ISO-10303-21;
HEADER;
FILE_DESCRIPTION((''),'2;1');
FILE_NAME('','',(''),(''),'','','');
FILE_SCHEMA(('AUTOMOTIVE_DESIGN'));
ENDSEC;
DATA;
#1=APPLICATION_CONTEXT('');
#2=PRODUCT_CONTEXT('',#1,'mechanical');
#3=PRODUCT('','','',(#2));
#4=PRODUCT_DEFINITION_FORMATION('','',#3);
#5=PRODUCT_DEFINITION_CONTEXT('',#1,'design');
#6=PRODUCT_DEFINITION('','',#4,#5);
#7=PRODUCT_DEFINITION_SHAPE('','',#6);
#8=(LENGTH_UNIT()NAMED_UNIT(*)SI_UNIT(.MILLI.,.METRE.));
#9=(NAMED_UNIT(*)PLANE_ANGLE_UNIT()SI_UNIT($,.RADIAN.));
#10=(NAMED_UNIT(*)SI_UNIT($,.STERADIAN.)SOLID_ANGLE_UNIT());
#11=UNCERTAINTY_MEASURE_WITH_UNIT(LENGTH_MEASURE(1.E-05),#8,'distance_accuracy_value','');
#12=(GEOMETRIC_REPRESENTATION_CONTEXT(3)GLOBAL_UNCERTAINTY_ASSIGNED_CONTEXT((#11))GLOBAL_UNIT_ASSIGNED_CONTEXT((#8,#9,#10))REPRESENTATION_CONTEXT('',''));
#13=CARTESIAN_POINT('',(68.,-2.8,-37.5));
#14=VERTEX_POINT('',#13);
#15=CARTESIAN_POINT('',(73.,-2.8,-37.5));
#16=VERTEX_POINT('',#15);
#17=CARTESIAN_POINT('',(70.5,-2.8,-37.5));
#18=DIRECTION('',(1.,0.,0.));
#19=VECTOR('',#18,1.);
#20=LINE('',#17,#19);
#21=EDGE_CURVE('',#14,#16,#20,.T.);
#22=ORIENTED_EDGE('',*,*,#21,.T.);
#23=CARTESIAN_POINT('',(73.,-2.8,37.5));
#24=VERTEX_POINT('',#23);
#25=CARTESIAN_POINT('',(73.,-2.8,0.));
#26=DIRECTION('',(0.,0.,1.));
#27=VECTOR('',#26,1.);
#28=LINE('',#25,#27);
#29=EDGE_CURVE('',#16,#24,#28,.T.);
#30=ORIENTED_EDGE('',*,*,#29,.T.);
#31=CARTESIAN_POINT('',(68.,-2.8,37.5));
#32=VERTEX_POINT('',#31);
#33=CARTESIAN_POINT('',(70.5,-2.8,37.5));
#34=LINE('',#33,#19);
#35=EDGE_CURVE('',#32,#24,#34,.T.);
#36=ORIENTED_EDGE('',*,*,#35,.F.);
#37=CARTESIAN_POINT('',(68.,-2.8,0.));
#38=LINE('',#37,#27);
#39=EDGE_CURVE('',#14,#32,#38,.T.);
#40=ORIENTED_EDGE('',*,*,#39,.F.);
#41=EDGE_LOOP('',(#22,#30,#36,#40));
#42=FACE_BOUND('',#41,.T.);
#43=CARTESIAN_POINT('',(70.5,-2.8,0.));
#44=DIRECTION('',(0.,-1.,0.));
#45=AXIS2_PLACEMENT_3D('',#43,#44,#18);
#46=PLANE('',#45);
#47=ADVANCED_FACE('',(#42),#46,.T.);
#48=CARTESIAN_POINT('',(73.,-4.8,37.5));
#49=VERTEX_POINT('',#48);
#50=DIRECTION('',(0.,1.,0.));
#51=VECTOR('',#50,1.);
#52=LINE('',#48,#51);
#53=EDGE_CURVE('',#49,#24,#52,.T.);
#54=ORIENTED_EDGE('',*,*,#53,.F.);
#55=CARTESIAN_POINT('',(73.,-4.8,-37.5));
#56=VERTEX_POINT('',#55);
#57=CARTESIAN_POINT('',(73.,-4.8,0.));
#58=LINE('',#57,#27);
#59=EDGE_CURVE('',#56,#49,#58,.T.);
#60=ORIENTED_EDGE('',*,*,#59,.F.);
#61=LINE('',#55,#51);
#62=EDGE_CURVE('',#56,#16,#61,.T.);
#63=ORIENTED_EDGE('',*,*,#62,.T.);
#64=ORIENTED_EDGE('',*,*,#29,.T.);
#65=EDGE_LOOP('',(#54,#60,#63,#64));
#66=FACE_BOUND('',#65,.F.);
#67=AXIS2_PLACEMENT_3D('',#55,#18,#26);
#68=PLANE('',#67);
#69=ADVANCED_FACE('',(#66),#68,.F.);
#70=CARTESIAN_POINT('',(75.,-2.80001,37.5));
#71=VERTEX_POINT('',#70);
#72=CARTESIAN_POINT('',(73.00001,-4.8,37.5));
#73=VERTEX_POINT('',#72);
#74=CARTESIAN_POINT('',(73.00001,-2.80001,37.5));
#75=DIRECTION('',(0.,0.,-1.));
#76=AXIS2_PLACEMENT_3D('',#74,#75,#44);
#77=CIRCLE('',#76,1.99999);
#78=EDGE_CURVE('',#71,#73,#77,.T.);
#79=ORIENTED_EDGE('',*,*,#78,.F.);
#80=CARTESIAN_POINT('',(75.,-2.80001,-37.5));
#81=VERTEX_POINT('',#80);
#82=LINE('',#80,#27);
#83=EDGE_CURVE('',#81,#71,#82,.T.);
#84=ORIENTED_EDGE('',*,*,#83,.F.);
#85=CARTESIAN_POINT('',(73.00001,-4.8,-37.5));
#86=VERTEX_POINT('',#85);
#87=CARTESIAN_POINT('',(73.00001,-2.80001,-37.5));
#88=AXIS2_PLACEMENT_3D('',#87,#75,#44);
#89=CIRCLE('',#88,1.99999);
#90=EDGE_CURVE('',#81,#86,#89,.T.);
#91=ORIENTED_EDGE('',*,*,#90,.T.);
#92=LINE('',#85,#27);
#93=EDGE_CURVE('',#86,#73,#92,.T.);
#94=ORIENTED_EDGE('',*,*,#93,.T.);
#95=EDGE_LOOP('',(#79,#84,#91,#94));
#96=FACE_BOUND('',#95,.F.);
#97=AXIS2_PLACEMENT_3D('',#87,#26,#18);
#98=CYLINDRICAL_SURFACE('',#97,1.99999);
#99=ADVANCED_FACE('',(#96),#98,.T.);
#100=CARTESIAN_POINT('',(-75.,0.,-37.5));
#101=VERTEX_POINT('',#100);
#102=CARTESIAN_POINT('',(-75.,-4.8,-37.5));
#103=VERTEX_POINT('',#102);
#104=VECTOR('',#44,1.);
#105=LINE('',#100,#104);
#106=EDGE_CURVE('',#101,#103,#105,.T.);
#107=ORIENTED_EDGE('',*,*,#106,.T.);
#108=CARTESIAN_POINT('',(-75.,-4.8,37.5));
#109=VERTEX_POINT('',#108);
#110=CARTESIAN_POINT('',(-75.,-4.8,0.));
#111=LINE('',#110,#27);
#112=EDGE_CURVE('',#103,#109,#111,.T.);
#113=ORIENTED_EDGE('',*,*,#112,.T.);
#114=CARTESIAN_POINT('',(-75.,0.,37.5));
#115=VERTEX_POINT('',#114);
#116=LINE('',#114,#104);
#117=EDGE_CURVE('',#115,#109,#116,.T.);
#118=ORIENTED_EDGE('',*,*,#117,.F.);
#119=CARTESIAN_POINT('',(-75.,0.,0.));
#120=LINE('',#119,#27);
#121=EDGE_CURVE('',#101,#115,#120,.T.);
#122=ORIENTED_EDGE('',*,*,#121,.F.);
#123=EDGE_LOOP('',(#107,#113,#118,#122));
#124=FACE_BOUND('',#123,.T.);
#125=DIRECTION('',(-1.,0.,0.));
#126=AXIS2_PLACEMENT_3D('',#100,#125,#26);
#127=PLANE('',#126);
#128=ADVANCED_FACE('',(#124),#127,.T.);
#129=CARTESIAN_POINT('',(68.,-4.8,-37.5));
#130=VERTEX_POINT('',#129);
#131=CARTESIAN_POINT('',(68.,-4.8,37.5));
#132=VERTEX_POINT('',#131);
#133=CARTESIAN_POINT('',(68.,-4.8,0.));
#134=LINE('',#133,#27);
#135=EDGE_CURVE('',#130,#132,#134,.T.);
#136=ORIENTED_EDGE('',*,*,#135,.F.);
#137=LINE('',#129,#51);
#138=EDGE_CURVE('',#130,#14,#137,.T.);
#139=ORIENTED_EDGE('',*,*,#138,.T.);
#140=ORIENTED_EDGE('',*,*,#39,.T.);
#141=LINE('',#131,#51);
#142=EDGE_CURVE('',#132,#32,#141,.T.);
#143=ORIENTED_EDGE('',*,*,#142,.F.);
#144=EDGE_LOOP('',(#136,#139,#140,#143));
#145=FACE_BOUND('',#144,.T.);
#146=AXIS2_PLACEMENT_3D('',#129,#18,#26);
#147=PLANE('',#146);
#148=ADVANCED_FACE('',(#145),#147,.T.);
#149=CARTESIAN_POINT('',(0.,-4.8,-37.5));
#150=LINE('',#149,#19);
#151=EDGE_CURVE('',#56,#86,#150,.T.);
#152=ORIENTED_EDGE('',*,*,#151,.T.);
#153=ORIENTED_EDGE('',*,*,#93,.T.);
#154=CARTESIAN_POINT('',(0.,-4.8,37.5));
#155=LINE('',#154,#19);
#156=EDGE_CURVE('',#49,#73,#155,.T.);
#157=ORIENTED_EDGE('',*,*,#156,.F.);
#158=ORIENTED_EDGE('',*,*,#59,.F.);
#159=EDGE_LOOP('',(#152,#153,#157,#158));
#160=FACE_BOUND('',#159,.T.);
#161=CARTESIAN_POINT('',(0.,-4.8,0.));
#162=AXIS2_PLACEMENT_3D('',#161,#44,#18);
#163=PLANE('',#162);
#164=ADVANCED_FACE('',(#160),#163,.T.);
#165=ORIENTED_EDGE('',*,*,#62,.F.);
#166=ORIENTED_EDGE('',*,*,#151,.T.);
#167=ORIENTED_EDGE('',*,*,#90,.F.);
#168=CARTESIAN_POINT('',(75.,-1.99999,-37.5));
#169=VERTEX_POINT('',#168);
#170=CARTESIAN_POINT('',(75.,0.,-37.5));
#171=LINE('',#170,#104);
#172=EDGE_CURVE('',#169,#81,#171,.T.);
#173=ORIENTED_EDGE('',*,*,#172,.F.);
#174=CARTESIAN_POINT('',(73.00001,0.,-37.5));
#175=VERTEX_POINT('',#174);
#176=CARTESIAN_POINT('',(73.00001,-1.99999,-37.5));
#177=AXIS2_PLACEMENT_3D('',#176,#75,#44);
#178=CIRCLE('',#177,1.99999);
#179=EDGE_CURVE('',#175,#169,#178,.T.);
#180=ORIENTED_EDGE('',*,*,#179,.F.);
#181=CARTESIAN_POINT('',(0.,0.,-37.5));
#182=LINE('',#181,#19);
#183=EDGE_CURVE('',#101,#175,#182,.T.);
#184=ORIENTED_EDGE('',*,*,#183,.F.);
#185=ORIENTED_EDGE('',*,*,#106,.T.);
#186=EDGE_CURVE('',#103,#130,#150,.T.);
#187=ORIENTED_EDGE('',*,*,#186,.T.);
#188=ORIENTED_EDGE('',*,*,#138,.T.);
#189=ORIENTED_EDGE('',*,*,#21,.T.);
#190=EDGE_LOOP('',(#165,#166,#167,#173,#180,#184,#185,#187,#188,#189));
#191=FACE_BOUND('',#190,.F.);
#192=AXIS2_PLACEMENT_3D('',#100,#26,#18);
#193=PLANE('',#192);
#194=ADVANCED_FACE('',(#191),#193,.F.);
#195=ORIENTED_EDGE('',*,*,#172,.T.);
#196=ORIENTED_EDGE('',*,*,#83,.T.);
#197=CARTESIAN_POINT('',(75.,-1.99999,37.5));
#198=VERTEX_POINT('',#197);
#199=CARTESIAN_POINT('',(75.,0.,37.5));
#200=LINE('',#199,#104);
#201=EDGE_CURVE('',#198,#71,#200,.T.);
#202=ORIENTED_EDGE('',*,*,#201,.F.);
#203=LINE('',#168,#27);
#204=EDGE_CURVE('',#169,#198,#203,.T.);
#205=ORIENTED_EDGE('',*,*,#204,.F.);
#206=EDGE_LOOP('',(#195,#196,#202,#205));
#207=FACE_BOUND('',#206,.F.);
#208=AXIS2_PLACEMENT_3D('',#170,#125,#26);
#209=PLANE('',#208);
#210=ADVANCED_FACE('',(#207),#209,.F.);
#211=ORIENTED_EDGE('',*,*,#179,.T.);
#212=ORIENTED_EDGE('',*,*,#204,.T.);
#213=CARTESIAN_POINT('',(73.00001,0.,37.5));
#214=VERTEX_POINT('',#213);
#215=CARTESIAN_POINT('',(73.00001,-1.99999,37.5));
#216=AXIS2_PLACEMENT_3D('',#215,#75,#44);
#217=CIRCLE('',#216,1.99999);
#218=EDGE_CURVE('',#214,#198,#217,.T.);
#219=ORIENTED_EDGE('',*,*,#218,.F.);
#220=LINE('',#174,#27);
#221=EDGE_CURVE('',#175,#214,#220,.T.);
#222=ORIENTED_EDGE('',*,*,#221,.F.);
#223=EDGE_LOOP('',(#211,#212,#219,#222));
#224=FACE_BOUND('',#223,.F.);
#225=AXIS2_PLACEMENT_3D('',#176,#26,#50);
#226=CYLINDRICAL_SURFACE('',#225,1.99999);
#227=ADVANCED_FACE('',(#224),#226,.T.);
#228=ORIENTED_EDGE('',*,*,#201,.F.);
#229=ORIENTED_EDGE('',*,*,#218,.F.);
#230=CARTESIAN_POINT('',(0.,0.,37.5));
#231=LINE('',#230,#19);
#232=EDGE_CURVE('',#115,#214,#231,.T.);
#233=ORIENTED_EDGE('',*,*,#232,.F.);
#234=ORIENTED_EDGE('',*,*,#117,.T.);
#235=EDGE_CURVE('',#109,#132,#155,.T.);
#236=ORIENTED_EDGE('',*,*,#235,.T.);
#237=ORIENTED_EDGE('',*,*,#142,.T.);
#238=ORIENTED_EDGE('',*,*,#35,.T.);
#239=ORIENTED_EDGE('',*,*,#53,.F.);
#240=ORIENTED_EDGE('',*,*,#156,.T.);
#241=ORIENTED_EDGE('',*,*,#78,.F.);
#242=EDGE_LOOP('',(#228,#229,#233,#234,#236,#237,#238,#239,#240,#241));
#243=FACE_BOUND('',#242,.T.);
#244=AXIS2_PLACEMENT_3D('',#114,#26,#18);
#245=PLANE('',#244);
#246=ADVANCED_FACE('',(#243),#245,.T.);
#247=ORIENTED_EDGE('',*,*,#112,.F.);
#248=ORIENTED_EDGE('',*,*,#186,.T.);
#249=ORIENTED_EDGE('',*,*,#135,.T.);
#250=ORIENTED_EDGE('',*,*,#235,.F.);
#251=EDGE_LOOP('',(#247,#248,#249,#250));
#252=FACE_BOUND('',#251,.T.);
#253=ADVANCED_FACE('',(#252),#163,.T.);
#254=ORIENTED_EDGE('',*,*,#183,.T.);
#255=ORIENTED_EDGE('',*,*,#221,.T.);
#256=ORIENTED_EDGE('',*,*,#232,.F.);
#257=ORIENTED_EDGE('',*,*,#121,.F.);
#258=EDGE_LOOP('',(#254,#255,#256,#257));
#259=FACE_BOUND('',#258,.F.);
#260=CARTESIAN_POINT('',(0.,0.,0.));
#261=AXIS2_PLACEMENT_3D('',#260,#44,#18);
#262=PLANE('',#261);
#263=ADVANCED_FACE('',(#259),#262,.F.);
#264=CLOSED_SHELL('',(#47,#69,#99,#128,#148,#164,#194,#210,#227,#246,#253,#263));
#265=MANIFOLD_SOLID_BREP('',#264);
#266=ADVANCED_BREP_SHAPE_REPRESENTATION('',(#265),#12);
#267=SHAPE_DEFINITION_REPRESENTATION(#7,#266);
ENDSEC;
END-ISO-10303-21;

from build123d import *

# Parameters (mm, degrees)
F0_W     = 150
F0_H     = 75
F1_DEPTH = 4.8
F2_W     = 5
F2_H     = 75
F3_DEPTH = 2
F4_R     = 1.99999


# Not quite as in the source:
# - a fillet or chamfer is up to 0.001 mm smaller than in the source, because OpenCascade refuses the exact size


with BuildPart() as f1:
    # F0 (on Front) → F1 (new body)
    with BuildSketch(Plane.XZ):
        Rectangle(F0_W, F0_H)
    extrude(amount=F1_DEPTH)

    # F2 (on face) → F3 (cut)
    with BuildSketch(Plane.XZ.offset(4.8)):
        with Locations((70.5, 0)):
            Rectangle(F2_W, F2_H)
    extrude(amount=-F3_DEPTH, mode=Mode.SUBTRACT)

    # F4 (radius 2 in the source; OpenCascade refuses exactly that, so slightly less here)
    f4_edges = [f1.edges().sort_by_distance(p)[0] for p in [
        (75, 0, 0),
        (75, -4.8, 0),
    ]]
    fillet(f4_edges, radius=F4_R)


solid = f1.part
